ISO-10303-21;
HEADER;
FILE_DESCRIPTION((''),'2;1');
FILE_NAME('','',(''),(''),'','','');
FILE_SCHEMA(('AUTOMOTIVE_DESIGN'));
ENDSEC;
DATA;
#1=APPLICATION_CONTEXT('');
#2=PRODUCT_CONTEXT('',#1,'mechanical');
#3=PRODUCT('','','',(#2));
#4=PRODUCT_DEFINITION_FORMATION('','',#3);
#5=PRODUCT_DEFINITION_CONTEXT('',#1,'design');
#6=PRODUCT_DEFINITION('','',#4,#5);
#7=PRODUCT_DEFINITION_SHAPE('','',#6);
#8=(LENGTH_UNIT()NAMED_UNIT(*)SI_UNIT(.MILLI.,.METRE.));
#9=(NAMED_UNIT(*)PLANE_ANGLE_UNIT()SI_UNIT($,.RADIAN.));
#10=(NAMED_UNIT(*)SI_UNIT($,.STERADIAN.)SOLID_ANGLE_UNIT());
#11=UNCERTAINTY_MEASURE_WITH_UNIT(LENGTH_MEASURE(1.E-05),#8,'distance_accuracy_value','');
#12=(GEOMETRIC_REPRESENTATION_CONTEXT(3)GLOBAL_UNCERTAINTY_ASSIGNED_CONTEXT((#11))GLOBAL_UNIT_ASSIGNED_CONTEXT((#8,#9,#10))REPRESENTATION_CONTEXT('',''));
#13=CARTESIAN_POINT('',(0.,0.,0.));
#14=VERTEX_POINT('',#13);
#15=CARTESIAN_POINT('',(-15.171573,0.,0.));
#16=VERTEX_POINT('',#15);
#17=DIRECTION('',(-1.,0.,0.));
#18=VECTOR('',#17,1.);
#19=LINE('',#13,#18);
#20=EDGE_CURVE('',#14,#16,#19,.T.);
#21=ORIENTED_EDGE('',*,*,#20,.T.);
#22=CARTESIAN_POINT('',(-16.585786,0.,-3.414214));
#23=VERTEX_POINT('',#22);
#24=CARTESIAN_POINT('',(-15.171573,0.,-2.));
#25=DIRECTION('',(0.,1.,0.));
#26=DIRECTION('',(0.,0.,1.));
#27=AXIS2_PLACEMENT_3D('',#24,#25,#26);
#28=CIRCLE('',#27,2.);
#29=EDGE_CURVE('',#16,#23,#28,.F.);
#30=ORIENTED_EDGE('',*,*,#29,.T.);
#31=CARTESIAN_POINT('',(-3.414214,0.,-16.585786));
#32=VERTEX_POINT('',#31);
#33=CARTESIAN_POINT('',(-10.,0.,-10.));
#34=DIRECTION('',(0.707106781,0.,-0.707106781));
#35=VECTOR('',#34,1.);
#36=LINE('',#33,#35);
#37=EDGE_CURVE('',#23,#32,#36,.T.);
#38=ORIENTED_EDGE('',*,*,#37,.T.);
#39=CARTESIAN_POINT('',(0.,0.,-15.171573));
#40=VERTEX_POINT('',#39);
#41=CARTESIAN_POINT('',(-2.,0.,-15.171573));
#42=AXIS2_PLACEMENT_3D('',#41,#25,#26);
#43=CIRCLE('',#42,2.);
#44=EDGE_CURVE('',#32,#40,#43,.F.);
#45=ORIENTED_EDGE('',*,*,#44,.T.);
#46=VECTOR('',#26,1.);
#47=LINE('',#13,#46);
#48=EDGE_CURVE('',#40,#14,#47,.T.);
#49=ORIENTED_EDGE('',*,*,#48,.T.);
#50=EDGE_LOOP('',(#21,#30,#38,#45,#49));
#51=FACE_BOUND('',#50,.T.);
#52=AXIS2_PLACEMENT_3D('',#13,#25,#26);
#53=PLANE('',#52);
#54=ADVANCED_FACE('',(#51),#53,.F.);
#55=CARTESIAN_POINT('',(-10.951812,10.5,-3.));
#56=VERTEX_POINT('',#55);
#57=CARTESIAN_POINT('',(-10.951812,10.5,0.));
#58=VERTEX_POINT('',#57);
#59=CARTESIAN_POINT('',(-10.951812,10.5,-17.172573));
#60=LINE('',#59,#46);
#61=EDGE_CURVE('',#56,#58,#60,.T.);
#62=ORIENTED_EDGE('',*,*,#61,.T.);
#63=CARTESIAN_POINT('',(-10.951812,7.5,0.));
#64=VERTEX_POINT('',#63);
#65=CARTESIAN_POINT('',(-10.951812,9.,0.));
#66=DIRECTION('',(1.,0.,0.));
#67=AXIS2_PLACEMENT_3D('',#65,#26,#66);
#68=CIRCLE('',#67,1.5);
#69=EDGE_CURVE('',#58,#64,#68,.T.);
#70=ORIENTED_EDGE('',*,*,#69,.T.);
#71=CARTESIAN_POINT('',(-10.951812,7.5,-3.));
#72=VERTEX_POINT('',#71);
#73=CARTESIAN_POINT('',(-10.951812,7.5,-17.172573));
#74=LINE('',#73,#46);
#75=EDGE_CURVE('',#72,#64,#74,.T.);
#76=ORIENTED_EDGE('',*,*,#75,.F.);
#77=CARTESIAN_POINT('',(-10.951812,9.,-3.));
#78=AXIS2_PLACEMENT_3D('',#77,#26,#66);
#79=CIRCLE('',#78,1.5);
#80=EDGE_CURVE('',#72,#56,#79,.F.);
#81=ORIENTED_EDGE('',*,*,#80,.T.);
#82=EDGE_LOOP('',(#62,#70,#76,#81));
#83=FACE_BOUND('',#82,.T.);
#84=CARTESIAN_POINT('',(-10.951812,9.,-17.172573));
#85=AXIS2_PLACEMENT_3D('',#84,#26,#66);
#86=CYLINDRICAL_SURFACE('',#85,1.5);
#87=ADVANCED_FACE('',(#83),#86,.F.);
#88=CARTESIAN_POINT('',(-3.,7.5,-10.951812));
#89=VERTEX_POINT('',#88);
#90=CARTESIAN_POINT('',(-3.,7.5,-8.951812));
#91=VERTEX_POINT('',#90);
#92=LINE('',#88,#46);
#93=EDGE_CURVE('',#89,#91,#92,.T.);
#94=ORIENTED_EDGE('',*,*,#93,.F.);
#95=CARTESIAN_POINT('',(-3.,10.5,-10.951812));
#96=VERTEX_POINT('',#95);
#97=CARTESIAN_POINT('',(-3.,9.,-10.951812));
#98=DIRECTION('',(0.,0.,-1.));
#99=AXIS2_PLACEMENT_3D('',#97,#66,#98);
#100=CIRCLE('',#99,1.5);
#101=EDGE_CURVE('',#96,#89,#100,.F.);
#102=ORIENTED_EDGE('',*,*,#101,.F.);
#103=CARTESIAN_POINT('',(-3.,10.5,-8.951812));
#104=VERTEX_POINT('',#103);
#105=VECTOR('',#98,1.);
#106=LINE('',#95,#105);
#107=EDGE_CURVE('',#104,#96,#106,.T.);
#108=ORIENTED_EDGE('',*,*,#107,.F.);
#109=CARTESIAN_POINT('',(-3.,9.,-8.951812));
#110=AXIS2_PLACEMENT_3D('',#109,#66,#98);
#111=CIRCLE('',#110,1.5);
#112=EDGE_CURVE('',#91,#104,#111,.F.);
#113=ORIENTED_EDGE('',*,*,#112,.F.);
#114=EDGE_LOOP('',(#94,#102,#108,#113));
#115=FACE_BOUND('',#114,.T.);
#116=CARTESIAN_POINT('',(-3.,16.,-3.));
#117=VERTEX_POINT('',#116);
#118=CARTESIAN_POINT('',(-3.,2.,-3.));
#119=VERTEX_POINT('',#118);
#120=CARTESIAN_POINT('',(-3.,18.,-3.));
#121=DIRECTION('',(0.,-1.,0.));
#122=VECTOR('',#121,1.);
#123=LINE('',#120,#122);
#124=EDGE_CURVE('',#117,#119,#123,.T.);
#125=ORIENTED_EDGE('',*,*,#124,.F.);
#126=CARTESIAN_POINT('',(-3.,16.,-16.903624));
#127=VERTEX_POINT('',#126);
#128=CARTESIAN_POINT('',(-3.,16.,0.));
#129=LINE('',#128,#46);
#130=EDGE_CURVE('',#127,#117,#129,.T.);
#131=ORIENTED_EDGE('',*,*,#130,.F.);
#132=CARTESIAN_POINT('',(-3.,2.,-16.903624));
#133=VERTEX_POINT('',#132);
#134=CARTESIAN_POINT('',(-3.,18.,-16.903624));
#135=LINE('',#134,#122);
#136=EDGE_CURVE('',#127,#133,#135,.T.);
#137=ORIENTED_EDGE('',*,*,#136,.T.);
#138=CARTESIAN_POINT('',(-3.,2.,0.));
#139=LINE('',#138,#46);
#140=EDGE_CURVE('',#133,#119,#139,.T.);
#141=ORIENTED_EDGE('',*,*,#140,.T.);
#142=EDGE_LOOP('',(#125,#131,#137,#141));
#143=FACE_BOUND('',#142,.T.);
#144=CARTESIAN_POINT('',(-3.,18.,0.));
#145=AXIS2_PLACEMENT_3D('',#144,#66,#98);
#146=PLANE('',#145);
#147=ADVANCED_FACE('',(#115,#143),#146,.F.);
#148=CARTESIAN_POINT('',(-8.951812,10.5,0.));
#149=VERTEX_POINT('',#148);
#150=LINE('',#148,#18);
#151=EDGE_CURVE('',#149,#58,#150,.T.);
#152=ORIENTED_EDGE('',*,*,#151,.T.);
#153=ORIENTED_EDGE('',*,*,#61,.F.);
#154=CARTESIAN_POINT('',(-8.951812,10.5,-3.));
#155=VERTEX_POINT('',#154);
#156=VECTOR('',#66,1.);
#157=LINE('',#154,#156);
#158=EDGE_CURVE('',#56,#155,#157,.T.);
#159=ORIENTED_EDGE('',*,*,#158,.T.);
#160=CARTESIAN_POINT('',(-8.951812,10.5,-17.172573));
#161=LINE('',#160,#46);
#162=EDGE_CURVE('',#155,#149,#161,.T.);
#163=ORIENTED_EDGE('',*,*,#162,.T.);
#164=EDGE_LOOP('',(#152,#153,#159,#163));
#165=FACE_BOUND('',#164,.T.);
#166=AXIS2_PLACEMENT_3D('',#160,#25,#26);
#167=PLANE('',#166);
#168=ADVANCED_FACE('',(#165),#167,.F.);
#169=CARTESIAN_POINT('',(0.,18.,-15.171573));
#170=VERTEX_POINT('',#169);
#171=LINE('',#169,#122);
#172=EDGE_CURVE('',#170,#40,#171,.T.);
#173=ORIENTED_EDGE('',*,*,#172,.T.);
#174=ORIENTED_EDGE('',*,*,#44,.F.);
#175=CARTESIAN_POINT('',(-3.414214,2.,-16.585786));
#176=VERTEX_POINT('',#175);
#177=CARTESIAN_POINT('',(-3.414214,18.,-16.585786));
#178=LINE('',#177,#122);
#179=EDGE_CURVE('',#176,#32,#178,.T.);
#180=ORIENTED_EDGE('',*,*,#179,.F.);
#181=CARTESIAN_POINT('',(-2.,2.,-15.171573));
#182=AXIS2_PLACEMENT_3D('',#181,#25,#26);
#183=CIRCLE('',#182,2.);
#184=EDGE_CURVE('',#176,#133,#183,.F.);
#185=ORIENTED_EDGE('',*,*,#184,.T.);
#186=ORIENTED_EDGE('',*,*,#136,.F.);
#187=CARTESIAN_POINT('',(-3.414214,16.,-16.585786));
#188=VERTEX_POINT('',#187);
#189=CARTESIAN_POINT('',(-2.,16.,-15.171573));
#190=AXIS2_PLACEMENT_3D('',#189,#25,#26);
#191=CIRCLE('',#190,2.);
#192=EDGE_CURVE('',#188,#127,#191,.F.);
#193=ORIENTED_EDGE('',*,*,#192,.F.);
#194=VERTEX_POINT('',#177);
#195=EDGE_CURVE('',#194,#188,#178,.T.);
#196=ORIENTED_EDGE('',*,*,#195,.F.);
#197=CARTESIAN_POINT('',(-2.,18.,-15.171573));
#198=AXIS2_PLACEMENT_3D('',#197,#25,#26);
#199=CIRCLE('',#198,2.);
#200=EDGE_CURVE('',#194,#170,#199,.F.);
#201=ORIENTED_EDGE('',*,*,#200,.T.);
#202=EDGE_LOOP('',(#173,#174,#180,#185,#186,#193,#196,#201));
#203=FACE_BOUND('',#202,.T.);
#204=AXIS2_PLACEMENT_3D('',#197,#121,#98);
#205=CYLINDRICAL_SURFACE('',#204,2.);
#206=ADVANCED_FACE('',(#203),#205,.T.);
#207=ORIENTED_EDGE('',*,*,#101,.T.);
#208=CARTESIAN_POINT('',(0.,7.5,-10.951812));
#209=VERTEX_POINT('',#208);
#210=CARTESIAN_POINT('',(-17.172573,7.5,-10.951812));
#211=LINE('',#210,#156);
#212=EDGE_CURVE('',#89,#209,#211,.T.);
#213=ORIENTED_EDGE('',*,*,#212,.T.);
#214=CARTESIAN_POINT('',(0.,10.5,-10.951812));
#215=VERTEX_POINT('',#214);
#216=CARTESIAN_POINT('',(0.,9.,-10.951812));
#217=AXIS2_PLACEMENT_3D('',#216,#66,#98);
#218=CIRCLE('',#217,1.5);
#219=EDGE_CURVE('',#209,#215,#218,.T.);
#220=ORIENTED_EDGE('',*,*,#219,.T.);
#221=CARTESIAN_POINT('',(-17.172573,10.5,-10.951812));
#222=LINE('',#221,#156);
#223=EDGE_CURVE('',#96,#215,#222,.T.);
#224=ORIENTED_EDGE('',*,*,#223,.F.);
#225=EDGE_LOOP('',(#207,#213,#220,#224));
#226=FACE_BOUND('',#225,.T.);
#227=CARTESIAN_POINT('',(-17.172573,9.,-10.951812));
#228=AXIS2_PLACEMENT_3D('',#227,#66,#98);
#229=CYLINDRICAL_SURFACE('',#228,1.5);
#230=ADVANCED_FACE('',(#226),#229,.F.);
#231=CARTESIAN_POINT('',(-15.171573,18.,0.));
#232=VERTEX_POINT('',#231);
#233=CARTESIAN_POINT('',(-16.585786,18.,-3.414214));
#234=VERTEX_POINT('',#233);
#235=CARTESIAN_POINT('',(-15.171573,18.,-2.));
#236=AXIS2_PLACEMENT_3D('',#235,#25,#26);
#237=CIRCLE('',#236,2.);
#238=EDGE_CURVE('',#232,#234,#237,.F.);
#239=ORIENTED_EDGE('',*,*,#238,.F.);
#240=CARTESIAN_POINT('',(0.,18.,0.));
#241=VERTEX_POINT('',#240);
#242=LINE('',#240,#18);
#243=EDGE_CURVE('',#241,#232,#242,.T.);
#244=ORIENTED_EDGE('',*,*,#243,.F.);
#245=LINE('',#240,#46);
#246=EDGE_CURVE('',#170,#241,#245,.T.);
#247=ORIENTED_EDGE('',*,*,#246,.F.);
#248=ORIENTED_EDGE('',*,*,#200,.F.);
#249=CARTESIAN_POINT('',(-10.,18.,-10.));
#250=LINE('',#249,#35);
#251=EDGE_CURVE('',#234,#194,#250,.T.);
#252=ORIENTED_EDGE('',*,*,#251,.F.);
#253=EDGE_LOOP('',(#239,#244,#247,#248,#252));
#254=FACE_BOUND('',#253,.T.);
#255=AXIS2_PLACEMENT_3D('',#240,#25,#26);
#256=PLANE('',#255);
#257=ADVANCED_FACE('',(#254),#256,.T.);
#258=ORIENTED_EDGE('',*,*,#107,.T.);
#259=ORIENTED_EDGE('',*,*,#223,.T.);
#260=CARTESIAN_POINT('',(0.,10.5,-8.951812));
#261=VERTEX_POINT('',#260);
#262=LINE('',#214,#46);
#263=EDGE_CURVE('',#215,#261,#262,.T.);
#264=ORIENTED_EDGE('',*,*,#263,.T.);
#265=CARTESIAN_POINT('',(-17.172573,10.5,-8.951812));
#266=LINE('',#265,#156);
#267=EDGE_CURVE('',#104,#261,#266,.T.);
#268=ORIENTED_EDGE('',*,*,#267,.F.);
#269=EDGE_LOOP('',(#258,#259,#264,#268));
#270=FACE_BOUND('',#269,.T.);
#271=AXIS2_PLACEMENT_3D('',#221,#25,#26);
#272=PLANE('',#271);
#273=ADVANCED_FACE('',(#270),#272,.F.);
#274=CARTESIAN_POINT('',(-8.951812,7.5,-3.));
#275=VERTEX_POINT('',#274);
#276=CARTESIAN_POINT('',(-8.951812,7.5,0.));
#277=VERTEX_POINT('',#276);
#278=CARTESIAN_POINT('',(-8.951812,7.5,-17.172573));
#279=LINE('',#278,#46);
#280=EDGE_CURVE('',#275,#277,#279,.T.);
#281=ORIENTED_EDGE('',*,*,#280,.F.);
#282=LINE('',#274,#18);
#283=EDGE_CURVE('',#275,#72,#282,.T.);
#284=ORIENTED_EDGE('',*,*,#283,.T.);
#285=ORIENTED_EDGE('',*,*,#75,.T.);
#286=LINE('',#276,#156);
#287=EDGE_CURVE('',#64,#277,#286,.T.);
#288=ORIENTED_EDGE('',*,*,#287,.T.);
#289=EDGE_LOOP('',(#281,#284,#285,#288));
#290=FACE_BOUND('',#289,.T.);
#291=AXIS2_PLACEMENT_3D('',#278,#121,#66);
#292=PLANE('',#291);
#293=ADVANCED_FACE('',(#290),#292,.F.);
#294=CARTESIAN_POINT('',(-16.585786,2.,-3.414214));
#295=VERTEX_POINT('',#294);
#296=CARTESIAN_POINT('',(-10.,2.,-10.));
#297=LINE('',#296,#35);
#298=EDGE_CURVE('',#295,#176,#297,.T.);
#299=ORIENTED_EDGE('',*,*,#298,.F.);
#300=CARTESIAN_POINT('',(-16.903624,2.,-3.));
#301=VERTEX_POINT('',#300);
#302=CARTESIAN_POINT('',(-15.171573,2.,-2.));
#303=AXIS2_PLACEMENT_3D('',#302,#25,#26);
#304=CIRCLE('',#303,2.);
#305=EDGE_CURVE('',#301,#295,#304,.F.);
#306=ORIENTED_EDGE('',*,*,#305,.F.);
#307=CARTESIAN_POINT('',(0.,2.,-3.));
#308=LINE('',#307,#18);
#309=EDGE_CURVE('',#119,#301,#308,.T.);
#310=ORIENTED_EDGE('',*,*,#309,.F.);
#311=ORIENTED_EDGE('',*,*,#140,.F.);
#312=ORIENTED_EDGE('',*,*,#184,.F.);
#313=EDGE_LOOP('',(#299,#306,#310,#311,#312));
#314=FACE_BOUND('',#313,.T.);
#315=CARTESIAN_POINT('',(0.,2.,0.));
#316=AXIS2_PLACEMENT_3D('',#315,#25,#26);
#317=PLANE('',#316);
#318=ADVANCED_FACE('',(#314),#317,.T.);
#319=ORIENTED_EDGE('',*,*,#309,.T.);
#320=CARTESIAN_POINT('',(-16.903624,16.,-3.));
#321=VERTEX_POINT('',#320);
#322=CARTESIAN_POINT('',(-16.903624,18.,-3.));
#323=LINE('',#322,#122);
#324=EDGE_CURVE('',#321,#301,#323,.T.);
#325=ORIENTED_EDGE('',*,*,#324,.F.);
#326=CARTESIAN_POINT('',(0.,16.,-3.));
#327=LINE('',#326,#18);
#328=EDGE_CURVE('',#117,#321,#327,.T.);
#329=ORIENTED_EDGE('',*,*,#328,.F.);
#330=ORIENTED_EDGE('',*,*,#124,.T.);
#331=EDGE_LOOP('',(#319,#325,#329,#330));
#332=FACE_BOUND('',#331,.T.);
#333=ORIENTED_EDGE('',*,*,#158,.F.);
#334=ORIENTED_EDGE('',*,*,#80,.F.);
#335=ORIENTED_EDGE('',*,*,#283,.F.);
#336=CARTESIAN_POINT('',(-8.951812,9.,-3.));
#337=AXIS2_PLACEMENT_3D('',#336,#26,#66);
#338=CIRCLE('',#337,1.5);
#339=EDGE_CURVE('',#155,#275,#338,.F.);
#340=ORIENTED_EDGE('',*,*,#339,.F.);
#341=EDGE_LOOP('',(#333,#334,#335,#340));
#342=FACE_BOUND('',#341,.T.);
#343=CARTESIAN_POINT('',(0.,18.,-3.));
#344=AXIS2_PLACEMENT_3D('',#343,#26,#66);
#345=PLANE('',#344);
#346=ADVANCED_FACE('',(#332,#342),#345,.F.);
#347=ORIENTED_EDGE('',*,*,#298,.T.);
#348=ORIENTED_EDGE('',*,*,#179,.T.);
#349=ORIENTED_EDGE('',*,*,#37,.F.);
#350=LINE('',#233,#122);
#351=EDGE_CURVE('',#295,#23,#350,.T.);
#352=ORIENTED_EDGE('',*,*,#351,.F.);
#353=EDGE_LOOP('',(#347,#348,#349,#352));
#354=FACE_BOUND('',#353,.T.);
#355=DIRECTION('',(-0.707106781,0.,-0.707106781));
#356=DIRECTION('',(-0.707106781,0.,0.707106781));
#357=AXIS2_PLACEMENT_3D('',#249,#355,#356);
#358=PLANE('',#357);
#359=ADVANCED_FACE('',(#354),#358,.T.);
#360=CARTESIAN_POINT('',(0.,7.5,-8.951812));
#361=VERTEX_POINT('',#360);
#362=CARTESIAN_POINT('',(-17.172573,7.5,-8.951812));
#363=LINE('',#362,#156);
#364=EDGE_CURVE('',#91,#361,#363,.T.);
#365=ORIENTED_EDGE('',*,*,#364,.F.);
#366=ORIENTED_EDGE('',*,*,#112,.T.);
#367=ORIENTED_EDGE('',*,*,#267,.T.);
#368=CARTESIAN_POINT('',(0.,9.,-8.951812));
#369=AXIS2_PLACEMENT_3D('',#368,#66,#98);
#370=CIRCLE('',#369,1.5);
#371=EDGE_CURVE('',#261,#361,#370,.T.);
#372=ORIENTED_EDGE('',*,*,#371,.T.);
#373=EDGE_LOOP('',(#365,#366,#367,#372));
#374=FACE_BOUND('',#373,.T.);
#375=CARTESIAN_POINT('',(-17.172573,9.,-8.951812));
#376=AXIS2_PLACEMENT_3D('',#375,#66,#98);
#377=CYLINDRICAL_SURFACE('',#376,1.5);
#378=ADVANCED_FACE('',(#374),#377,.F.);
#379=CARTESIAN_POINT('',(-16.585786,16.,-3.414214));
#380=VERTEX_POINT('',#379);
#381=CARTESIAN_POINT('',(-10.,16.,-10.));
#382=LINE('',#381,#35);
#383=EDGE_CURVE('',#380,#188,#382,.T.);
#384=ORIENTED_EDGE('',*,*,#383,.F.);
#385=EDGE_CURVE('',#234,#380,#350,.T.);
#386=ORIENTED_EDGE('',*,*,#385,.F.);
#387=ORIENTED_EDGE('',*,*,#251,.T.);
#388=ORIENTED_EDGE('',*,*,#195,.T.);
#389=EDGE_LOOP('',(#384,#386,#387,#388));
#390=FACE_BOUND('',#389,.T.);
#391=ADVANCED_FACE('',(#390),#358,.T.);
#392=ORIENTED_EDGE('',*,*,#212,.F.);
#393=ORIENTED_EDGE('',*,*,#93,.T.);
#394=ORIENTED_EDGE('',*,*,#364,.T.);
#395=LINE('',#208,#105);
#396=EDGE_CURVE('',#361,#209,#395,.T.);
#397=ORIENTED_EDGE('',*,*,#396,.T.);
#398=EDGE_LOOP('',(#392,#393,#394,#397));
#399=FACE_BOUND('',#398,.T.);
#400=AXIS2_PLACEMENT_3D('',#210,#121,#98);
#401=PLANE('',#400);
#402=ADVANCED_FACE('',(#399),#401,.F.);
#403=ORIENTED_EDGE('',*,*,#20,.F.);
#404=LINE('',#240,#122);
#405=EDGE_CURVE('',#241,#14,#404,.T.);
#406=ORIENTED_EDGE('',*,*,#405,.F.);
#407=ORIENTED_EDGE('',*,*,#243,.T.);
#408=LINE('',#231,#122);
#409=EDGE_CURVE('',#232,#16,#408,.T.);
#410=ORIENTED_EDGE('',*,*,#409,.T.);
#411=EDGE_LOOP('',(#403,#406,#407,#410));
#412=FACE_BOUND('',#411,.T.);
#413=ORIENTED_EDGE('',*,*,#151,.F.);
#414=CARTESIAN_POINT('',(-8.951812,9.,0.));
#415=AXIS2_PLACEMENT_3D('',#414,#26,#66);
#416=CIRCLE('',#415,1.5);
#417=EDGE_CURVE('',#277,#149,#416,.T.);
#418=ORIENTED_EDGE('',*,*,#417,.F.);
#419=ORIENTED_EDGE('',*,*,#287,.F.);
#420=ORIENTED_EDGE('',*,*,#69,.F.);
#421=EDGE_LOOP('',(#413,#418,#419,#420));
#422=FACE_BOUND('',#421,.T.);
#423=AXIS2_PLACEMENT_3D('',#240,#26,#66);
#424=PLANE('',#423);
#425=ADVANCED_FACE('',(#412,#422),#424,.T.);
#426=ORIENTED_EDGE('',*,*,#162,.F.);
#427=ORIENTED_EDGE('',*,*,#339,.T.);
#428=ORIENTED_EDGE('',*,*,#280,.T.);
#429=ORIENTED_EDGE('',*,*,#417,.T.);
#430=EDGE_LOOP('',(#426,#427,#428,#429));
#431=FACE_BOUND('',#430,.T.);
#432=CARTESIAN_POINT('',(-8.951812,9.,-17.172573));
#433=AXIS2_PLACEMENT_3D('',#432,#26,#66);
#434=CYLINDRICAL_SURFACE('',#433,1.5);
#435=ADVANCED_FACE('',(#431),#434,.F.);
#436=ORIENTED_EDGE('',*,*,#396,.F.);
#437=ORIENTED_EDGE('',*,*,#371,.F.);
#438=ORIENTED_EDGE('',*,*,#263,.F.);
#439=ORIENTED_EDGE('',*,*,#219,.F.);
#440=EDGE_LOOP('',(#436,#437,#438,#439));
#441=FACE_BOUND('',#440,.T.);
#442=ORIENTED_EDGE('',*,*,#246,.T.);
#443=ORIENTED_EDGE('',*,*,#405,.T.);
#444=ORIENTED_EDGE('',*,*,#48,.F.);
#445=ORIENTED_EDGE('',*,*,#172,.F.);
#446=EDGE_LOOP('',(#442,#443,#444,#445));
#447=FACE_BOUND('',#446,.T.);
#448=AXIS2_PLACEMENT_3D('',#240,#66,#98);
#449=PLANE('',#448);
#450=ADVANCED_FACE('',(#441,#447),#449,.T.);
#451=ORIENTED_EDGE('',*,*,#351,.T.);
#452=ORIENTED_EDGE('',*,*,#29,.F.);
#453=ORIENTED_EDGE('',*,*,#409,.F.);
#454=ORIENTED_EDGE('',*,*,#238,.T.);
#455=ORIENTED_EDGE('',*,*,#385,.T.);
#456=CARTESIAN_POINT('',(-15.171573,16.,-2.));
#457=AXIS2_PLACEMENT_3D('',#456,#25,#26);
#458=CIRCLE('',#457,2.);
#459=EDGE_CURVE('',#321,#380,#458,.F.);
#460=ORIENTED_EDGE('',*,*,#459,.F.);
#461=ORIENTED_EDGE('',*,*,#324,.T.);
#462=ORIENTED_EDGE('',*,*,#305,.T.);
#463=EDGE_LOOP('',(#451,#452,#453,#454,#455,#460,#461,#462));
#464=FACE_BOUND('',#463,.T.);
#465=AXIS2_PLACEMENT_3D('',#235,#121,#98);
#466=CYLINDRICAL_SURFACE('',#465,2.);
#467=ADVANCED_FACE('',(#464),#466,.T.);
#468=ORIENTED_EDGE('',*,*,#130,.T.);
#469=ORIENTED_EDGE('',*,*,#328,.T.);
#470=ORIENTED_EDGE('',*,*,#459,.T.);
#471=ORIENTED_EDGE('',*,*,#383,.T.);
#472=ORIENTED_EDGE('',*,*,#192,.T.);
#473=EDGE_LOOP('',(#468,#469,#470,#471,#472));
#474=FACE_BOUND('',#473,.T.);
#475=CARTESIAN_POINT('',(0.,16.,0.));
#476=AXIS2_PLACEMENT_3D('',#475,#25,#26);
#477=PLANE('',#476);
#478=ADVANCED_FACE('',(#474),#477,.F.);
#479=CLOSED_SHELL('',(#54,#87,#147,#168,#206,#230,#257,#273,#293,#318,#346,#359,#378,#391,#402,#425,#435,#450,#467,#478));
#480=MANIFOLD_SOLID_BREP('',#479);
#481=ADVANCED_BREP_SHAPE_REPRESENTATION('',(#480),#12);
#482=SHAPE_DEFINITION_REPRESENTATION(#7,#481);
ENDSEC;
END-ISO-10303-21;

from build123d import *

# Parameters (mm, degrees)
DODANIE_WYCI_GNI_CIE1_DEPTH = 18
SKORUPA1_START              = 2
SKORUPA1_DEPTH              = 14
DODANIE_WYCI_GNI_CIE2_DEPTH = 18
WYTNIJ_WYCI_GNI_CIE1_REACH  = 32.228
WYTNIJ_WYCI_GNI_CIE2_REACH  = 32.228


# Read off the part's stored shape, not the designer's step: Skorupa1
with BuildPart() as part:
    # Szkic1 → Dodanie-wyciągnięcie1 (new body)
    with BuildSketch(Plane(origin=(0, 0, 0), x_dir=(1, 0, 0), z_dir=(0, 1, 0))):
        with BuildLine():
            Line((-15.171572875, 0), (0, 0))
            Line((0, 0), (0, 15.171572875))
            ThreePointArc((0, 15.171572875), (-1, 16.903623683), (-3, 16.903623683))
            Line((-3, 16.903623683), (-3, 3))
            Line((-3, 3), (-16.903623683, 3))
            ThreePointArc((-16.903623683, 3), (-16.903623683, 1), (-15.171572875, 0))
        make_face()
        with BuildLine():
            ThreePointArc((-16.585786438, 3.414213562), (-16.758279556, 3.217522858), (-16.903623683, 3))
            Line((-16.903623683, 3), (-3, 3))
            Line((-3, 3), (-3, 16.903623683))
            ThreePointArc((-3, 16.903623683), (-3.217522858, 16.758279556), (-3.414213562, 16.585786438))
            Line((-3.414213562, 16.585786438), (-16.585786438, 3.414213562))
        make_face()
    extrude(amount=DODANIE_WYCI_GNI_CIE1_DEPTH)

    # Skorupa1 outline → Skorupa1 (cut)
    with BuildSketch(Plane(origin=(0, 0, 0), x_dir=(1, 0, 0), z_dir=(0, 1, 0)).offset(SKORUPA1_START)):
        with BuildLine():
            Line((-3, 3), (-3, 15.171572875))
            Line((-3, 15.171572875), (0, 15.171572875))
            ThreePointArc((0, 15.171572875), (-1.234633135, 17.01933194), (-3.414213562, 16.585786438))
            Line((-3.414213562, 16.585786438), (-16.585786438, 3.414213562))
            ThreePointArc((-16.585786438, 3.414213562), (-17.01933194, 1.234633135), (-15.171572875, 0))
            Line((-15.171572875, 0), (-15.171572875, 3))
            Line((-15.171572875, 3), (-3, 3))
        make_face()
    extrude(amount=SKORUPA1_DEPTH, mode=Mode.SUBTRACT)

    # Szkic1<3> → Dodanie-wyciągnięcie2 (add)
    with BuildSketch(Plane(origin=(0, 0, 0), x_dir=(1, 0, 0), z_dir=(0, 1, 0))):
        with BuildLine():
            Line((-15.171572875, 0), (0, 0))
            Line((0, 0), (0, 15.171572875))
            ThreePointArc((0, 15.171572875), (-1, 16.903623683), (-3, 16.903623683))
            Line((-3, 16.903623683), (-3, 3))
            Line((-3, 3), (-16.903623683, 3))
            ThreePointArc((-16.903623683, 3), (-16.903623683, 1), (-15.171572875, 0))
        make_face()
    extrude(amount=DODANIE_WYCI_GNI_CIE2_DEPTH)

    # Szkic3 → Wytnij-wyciągnięcie1 (cut, up to next)
    with BuildSketch(Plane.XY, mode=Mode.PRIVATE) as wytnij_wyci_gni_cie1_sk1:
        with BuildLine():
            Line((-8.951811841, 7.5), (-10.951811841, 7.5))
            ThreePointArc((-10.951811841, 7.5), (-12.451811841, 9), (-10.951811841, 10.5))
            Line((-10.951811841, 10.5), (-8.951811841, 10.5))
            ThreePointArc((-8.951811841, 10.5), (-7.451811841, 9), (-8.951811841, 7.5))
        make_face()
    wytnij_wyci_gni_cie1_tool1 = extrude(wytnij_wyci_gni_cie1_sk1.sketch, amount=-WYTNIJ_WYCI_GNI_CIE1_REACH, mode=Mode.PRIVATE) & part.part
    add(wytnij_wyci_gni_cie1_tool1.solids().sort_by_distance((-9.951812, 9, 0))[0], mode=Mode.SUBTRACT)

    # Szkic4 → Wytnij-wyciągnięcie2 (cut, up to next)
    with BuildSketch(Plane(origin=(0, 0, 0), x_dir=(0, 0, -1), z_dir=(1, 0, 0)), mode=Mode.PRIVATE) as wytnij_wyci_gni_cie2_sk1:
        with BuildLine():
            Line((10.951811841, 7.5), (8.951811841, 7.5))
            ThreePointArc((8.951811841, 7.5), (7.451811841, 9), (8.951811841, 10.5))
            Line((8.951811841, 10.5), (10.951811841, 10.5))
            ThreePointArc((10.951811841, 10.5), (12.451811841, 9), (10.951811841, 7.5))
        make_face()
    wytnij_wyci_gni_cie2_tool1 = extrude(wytnij_wyci_gni_cie2_sk1.sketch, amount=-WYTNIJ_WYCI_GNI_CIE2_REACH, mode=Mode.PRIVATE) & part.part
    add(wytnij_wyci_gni_cie2_tool1.solids().sort_by_distance((0, 9, -9.951812))[0], mode=Mode.SUBTRACT)


solid = part.part
